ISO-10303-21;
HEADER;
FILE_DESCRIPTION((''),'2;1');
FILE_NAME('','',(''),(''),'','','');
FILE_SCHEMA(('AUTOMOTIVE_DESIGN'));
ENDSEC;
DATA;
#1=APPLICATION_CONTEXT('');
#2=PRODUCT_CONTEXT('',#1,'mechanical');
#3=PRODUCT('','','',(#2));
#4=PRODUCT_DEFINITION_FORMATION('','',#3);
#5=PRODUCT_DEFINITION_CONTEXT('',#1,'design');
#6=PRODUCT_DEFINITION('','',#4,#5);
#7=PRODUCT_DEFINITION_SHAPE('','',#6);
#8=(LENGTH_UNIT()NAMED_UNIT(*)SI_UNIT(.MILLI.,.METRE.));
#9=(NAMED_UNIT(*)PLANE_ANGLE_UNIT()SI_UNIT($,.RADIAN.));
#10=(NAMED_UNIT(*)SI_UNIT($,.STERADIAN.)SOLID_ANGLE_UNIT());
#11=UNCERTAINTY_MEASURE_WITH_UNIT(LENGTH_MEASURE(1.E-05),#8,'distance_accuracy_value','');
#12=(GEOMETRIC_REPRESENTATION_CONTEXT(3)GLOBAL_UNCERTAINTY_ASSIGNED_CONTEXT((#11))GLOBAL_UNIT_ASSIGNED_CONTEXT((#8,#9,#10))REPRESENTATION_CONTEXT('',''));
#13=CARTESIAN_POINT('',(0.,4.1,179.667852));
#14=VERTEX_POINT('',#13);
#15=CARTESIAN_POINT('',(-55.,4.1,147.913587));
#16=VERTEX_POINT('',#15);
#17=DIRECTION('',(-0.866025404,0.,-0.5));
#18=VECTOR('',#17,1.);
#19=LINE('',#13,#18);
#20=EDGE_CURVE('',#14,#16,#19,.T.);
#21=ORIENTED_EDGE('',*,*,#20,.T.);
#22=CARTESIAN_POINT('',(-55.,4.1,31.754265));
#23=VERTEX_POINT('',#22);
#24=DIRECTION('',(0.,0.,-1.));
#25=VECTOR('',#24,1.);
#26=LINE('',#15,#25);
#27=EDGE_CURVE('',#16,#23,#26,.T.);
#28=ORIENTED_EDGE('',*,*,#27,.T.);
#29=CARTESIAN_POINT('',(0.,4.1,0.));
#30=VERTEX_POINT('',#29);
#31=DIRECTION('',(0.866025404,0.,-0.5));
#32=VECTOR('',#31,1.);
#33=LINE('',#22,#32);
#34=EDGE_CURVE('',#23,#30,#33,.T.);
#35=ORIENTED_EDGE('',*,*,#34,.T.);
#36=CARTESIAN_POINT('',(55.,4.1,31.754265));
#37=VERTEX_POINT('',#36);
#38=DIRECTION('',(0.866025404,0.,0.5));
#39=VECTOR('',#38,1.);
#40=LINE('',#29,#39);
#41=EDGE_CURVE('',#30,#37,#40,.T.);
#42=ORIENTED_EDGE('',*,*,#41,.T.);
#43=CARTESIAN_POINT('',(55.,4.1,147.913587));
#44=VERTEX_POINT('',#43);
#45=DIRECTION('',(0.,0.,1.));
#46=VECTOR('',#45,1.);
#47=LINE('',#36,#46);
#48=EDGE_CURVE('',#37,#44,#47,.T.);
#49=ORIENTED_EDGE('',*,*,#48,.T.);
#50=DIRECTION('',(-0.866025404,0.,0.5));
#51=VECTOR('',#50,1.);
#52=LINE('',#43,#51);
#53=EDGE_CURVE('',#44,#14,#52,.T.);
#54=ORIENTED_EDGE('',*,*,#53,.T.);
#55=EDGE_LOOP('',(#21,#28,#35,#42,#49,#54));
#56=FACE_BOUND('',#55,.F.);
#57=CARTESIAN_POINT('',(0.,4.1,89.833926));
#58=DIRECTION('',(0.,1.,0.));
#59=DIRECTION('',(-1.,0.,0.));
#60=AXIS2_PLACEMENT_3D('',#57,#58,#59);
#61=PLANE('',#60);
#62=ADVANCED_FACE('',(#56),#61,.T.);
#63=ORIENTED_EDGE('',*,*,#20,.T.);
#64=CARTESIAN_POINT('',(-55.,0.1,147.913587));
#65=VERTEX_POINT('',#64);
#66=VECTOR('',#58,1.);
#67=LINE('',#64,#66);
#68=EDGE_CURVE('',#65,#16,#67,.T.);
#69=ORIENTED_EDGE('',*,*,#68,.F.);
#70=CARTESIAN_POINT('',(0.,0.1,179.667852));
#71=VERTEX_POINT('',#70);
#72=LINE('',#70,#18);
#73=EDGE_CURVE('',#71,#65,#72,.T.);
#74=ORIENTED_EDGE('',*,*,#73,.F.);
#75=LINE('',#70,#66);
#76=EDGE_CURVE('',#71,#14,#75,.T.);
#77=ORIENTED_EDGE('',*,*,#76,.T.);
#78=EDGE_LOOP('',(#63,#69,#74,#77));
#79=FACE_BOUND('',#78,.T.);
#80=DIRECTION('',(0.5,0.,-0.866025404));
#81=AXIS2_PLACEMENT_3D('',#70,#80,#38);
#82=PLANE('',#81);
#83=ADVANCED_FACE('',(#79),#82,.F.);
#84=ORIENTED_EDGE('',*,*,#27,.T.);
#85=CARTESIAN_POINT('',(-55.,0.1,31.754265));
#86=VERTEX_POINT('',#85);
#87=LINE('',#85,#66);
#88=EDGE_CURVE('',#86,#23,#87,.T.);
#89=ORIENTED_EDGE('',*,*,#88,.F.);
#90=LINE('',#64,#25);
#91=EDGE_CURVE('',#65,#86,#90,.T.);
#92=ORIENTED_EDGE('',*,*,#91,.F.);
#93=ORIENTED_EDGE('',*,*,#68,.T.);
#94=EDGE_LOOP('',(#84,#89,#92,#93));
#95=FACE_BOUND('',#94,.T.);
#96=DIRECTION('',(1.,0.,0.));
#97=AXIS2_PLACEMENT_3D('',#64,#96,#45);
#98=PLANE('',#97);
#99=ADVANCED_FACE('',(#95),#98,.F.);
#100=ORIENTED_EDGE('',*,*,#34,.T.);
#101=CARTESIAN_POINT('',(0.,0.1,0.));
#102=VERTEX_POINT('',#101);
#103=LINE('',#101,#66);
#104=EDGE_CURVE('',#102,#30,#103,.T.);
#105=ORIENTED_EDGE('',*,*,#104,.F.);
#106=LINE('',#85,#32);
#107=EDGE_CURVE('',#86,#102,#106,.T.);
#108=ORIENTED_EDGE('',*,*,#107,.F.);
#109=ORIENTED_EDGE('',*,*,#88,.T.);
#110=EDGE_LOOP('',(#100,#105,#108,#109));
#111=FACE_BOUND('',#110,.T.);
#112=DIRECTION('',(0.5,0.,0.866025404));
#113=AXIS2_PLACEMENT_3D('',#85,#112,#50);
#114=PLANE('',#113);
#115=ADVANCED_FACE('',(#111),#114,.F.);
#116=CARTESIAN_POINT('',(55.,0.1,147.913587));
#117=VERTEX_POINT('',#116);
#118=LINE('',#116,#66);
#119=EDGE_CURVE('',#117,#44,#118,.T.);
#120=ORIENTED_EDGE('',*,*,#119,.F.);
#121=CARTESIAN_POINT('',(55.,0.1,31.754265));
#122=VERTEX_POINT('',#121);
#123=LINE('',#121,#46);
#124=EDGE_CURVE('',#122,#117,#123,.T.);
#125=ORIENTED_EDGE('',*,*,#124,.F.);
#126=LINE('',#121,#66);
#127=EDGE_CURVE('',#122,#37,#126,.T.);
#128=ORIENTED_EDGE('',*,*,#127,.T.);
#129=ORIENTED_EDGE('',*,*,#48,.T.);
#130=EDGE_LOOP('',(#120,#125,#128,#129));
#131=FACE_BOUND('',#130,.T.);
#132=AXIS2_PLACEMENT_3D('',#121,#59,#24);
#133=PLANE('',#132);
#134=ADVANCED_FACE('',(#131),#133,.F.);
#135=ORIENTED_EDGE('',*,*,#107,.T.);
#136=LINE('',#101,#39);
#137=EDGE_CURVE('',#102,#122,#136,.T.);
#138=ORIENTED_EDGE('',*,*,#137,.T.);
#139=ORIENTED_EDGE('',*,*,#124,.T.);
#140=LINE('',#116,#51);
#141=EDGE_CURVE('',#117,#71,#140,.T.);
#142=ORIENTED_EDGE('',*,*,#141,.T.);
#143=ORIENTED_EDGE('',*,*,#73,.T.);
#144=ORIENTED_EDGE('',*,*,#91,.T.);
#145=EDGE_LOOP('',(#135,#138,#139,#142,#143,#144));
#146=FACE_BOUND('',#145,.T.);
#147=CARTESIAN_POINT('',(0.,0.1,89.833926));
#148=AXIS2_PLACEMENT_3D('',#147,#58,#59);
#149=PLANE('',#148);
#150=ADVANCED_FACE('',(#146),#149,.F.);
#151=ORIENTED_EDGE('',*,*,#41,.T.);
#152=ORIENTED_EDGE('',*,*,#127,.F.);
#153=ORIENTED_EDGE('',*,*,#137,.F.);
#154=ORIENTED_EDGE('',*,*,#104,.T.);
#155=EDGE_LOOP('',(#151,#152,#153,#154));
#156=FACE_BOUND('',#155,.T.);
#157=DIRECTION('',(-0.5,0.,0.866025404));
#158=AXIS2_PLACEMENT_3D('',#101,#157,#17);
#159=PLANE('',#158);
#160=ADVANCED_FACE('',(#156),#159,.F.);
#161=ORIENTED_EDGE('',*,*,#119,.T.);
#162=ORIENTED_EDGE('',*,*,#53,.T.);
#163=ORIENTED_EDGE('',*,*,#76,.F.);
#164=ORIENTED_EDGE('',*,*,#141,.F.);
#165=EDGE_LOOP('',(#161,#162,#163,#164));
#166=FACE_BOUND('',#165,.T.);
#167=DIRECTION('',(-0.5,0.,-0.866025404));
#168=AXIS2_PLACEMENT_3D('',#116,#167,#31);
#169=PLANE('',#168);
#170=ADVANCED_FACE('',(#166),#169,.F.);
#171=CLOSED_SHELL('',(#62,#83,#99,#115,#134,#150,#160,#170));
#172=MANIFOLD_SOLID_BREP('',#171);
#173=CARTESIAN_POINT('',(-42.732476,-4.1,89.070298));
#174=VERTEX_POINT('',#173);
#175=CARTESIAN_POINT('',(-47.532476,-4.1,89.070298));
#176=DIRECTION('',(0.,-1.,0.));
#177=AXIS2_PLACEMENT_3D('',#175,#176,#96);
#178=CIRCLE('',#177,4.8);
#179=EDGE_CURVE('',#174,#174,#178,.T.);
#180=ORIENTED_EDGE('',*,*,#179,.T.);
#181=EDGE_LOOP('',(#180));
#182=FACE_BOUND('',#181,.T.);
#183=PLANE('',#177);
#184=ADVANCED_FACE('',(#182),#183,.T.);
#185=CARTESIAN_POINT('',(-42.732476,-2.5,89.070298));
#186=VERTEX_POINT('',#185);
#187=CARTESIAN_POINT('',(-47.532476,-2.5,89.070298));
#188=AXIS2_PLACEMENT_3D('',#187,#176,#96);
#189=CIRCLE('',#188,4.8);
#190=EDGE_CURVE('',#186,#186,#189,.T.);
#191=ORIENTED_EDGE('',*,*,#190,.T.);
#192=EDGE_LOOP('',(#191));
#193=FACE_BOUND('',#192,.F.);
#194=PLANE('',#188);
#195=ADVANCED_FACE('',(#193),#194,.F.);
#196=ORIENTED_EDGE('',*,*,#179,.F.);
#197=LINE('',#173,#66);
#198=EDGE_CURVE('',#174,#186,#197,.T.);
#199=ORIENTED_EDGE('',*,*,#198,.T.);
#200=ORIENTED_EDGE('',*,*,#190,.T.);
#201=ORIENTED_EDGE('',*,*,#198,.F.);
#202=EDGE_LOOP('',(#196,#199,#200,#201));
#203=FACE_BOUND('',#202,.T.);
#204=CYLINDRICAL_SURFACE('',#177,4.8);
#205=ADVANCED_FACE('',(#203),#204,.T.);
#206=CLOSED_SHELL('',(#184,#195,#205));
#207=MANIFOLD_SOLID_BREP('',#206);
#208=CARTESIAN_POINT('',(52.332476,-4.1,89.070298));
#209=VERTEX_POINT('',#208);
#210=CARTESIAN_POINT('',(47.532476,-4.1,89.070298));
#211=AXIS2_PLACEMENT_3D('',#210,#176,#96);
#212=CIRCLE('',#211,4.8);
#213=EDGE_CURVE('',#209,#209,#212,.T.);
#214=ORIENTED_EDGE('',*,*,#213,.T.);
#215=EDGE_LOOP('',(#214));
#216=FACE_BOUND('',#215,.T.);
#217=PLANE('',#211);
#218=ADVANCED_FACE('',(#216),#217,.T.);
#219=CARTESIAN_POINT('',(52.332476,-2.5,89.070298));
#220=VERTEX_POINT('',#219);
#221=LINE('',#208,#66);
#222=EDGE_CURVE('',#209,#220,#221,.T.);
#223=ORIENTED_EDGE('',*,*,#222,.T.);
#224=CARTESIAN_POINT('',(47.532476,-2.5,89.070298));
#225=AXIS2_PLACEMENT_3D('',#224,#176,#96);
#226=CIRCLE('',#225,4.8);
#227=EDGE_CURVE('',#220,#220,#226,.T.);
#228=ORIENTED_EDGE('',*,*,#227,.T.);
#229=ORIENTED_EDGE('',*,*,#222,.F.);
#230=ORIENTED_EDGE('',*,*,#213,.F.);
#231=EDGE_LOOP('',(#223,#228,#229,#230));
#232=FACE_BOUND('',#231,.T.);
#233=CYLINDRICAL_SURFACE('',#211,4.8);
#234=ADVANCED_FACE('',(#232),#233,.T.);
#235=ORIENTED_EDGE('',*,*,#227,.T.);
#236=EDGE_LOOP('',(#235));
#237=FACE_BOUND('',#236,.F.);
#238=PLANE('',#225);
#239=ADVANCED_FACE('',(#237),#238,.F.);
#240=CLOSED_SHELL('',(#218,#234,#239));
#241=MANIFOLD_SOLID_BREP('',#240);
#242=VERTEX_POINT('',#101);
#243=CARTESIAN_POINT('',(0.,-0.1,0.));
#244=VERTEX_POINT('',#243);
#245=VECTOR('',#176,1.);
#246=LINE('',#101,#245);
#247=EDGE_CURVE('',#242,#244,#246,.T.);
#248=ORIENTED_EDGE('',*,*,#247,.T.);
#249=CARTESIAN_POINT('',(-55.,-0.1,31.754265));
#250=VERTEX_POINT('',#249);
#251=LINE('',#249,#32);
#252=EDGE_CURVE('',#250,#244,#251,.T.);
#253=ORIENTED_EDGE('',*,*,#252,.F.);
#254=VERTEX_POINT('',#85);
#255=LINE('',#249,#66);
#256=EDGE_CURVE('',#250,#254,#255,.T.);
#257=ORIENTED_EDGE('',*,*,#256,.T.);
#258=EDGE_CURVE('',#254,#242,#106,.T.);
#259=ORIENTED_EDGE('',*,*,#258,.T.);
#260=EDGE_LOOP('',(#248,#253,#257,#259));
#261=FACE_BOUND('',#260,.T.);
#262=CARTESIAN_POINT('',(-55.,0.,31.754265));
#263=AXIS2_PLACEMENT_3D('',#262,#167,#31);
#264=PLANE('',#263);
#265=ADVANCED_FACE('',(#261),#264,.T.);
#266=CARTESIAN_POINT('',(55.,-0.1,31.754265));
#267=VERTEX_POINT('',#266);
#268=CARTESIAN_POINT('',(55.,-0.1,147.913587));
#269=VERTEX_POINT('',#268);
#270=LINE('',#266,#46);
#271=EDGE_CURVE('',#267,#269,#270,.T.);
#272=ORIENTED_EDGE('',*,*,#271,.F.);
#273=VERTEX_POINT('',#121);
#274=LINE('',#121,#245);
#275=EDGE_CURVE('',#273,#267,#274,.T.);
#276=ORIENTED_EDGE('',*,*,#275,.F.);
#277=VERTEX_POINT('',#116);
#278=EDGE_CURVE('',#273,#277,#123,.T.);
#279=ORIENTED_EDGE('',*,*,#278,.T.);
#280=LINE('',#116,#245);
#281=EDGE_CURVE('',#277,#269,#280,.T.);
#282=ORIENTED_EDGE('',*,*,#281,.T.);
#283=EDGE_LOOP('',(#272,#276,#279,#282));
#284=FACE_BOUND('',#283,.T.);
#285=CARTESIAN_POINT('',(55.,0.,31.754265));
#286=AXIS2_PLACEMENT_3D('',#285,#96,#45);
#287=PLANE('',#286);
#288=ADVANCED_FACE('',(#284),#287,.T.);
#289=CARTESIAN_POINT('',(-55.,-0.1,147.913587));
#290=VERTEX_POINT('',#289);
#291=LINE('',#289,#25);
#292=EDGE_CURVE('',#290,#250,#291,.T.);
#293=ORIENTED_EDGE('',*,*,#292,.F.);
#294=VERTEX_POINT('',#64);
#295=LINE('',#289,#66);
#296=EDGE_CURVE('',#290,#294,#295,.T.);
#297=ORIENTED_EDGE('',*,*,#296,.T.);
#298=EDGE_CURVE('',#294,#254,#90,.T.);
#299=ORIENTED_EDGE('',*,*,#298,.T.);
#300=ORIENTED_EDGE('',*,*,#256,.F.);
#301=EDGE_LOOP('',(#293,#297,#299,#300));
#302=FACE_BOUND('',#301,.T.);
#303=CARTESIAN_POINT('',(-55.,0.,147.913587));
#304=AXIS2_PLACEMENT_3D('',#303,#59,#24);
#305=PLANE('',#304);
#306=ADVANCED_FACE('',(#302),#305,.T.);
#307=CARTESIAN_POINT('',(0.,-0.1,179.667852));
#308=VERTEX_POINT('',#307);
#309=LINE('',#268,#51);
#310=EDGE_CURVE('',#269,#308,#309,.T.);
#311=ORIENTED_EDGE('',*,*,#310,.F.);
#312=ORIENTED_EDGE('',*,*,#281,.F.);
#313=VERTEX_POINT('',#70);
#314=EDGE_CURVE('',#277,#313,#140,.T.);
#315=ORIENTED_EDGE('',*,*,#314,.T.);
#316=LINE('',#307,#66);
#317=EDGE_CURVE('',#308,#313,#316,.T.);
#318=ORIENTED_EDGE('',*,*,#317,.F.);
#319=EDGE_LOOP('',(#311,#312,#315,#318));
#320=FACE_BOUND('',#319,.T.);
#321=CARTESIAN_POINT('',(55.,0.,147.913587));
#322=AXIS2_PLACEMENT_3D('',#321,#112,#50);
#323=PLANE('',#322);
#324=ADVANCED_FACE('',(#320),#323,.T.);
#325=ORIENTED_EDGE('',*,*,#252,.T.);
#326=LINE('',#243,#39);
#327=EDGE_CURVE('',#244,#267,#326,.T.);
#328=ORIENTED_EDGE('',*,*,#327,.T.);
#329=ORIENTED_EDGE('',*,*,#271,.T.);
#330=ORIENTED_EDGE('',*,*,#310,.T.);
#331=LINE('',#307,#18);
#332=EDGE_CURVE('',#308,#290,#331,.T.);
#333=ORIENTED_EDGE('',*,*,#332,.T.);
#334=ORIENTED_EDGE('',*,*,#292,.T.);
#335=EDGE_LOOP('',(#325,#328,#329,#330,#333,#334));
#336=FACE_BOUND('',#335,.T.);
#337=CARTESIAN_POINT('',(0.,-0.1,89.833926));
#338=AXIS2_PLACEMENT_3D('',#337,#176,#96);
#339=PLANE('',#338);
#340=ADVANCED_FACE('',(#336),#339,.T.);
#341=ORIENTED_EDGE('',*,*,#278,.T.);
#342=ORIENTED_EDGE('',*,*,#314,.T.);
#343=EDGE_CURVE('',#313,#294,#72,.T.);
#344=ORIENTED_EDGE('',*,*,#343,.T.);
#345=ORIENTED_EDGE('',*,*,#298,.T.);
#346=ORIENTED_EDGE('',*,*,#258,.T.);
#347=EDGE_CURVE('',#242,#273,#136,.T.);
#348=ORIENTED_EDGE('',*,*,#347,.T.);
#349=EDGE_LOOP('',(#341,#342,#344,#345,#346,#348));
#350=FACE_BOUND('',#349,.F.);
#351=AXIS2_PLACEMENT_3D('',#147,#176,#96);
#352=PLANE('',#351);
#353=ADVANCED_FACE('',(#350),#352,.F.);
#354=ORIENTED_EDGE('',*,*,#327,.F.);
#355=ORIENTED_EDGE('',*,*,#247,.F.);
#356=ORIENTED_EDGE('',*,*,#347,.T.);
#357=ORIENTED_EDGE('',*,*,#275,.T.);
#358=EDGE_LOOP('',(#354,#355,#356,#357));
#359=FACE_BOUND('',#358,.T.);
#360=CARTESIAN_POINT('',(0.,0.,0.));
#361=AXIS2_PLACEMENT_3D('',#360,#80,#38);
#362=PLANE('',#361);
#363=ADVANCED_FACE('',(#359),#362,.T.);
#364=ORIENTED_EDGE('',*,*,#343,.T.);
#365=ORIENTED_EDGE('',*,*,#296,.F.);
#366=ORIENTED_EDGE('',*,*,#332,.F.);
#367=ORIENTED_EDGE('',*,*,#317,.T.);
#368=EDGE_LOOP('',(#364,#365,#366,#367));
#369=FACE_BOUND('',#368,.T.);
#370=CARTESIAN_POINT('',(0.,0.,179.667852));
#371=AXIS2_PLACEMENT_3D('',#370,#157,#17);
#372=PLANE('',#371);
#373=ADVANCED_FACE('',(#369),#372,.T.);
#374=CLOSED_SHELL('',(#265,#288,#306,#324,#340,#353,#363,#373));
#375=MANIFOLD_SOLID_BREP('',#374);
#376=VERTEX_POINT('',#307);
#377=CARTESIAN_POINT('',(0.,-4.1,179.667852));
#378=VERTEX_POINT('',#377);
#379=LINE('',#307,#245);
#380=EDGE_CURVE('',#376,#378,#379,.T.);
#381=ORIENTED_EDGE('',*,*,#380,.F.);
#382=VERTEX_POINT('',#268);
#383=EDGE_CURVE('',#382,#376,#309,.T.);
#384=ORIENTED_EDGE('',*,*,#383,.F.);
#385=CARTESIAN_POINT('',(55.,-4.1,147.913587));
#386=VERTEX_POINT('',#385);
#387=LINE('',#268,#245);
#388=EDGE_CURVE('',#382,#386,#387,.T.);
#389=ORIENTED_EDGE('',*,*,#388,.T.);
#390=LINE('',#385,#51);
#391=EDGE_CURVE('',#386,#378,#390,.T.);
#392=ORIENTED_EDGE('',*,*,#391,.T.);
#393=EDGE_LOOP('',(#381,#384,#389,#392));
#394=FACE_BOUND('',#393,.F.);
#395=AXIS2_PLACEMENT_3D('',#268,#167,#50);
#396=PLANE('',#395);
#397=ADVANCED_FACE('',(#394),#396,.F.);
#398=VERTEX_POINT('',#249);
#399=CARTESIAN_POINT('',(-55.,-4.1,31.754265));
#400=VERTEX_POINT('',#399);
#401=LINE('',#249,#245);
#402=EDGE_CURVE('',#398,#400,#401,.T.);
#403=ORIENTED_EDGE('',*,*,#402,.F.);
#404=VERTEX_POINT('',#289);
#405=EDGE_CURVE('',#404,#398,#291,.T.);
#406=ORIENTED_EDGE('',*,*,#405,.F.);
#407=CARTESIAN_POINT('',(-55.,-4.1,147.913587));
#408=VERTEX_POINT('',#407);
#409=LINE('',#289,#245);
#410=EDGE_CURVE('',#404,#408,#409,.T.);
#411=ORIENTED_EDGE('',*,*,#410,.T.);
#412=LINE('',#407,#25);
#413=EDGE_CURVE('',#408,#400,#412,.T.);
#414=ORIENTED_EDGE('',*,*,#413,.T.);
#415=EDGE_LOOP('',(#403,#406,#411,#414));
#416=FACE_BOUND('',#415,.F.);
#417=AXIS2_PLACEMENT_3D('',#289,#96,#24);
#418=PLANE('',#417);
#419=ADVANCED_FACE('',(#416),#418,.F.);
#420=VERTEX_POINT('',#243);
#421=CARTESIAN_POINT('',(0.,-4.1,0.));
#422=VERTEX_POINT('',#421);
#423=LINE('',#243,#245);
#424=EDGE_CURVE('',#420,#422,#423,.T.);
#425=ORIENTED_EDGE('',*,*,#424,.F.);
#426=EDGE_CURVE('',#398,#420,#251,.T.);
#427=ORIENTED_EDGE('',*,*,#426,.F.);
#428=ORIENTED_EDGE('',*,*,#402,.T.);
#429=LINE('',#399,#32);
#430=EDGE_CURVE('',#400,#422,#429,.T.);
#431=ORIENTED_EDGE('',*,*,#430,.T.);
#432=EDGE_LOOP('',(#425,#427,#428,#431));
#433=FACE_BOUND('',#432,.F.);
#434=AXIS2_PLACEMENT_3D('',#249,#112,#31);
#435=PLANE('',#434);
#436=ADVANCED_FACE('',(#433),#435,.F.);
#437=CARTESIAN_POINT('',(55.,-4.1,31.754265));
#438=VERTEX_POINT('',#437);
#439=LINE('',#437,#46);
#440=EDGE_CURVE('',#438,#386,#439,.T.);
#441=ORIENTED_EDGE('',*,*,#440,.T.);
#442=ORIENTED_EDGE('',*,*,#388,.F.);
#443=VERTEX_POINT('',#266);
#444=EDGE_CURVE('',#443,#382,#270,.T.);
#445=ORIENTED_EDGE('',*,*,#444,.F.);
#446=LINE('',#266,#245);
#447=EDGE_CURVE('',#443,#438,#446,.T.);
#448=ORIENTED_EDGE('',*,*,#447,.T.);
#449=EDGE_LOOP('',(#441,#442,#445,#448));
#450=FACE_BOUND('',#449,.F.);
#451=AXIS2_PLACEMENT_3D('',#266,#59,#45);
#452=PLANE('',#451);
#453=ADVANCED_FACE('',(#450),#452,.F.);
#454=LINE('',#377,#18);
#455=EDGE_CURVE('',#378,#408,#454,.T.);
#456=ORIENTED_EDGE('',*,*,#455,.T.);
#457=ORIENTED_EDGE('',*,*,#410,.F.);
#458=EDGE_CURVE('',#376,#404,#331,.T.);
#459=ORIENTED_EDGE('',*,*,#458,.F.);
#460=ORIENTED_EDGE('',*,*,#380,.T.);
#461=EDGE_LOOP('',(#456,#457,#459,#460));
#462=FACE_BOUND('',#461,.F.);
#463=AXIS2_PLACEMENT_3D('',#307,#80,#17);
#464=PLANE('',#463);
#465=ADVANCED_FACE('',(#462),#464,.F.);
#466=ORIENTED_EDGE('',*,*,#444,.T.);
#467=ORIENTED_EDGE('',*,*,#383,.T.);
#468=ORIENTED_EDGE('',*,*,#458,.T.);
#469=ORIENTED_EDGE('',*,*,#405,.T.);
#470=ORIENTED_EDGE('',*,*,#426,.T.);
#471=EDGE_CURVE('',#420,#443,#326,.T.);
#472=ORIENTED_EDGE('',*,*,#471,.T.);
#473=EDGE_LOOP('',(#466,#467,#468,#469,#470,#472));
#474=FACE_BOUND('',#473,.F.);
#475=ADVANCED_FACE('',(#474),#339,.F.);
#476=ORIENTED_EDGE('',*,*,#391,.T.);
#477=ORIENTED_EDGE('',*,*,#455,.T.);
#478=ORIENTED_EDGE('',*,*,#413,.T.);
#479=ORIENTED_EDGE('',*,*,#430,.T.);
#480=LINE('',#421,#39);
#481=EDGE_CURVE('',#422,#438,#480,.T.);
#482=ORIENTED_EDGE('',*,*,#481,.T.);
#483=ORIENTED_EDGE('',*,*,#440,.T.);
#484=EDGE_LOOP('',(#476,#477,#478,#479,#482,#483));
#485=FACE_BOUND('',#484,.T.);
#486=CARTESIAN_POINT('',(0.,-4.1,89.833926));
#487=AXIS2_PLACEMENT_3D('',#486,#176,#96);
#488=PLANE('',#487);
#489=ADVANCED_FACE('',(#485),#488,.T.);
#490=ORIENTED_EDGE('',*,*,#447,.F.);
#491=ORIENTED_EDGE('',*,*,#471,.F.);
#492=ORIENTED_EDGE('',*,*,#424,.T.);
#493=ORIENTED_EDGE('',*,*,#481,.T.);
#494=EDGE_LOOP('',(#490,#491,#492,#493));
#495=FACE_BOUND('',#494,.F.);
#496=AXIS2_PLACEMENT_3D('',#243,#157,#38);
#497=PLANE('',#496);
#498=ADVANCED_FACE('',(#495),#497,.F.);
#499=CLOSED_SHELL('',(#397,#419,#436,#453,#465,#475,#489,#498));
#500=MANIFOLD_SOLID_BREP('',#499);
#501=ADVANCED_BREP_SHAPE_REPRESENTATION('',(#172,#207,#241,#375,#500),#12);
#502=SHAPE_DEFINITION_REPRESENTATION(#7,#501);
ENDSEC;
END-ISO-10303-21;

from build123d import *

# Parameters (mm, degrees)
F1_DEPTH = 0.1
F3_DEPTH = 4
F4_R     = 4.8
F5_DEPTH = 1.6
F7_R     = 4.8
F8_DEPTH = 1.6


# Not quite as in the source:
# - a feature names something its author has since deleted; it is built from what else it names


with BuildPart() as f1:
    # F0 (on Front) → F1 (new body, symmetric)
    with BuildSketch(Plane.XZ):
        Polygon((-55, 31.7542648054), (0, 0), (55, 31.7542648054), (55, 147.9135872183), (0, 179.6678520237), (-55, 147.9135872183), align=None)
    extrude(amount=F1_DEPTH, both=True)

    # F4 (on face) → F5 (cut)
    with BuildSketch(Plane.XZ.offset(4.1)):
        with Locations((62, 89.8339260119)):
            Circle(F4_R)
        with Locations((-62, 89.8339260119)):
            Circle(F4_R)
    extrude(amount=-F5_DEPTH, mode=Mode.SUBTRACT)


with BuildPart() as f3:
    # F2 (on face) → F3 (new body)
    with BuildSketch(Plane.XZ.offset(0.1)):
        Polygon((0, 179.6678520237), (-55, 147.9135872183), (-55, 31.7542648054), (0, 0), (55, 31.7542648054), (55, 147.9135872183), align=None)
    extrude(amount=F3_DEPTH)


with BuildPart() as f6_1:
    # F6: instance of F3
    add(f3.part.mirror(Plane.XZ))


with BuildPart() as f8:
    # F7 (on face) → F8 (new body)
    with BuildSketch(Plane.XZ.offset(4.1)):
        with Locations((-47.5324755942, 89.0702977777)):
            Circle(F7_R)
    extrude(amount=-F8_DEPTH)


with BuildPart() as f8b:
    # F7 (on face) → F8, piece 2 (new body)
    with BuildSketch(Plane.XZ.offset(4.1)):
        with Locations((47.5324755942, 89.0702977777)):
            Circle(F7_R)
    extrude(amount=-F8_DEPTH)


solid = Compound([f1.part, f3.part, f6_1.part, f8.part, f8b.part])
